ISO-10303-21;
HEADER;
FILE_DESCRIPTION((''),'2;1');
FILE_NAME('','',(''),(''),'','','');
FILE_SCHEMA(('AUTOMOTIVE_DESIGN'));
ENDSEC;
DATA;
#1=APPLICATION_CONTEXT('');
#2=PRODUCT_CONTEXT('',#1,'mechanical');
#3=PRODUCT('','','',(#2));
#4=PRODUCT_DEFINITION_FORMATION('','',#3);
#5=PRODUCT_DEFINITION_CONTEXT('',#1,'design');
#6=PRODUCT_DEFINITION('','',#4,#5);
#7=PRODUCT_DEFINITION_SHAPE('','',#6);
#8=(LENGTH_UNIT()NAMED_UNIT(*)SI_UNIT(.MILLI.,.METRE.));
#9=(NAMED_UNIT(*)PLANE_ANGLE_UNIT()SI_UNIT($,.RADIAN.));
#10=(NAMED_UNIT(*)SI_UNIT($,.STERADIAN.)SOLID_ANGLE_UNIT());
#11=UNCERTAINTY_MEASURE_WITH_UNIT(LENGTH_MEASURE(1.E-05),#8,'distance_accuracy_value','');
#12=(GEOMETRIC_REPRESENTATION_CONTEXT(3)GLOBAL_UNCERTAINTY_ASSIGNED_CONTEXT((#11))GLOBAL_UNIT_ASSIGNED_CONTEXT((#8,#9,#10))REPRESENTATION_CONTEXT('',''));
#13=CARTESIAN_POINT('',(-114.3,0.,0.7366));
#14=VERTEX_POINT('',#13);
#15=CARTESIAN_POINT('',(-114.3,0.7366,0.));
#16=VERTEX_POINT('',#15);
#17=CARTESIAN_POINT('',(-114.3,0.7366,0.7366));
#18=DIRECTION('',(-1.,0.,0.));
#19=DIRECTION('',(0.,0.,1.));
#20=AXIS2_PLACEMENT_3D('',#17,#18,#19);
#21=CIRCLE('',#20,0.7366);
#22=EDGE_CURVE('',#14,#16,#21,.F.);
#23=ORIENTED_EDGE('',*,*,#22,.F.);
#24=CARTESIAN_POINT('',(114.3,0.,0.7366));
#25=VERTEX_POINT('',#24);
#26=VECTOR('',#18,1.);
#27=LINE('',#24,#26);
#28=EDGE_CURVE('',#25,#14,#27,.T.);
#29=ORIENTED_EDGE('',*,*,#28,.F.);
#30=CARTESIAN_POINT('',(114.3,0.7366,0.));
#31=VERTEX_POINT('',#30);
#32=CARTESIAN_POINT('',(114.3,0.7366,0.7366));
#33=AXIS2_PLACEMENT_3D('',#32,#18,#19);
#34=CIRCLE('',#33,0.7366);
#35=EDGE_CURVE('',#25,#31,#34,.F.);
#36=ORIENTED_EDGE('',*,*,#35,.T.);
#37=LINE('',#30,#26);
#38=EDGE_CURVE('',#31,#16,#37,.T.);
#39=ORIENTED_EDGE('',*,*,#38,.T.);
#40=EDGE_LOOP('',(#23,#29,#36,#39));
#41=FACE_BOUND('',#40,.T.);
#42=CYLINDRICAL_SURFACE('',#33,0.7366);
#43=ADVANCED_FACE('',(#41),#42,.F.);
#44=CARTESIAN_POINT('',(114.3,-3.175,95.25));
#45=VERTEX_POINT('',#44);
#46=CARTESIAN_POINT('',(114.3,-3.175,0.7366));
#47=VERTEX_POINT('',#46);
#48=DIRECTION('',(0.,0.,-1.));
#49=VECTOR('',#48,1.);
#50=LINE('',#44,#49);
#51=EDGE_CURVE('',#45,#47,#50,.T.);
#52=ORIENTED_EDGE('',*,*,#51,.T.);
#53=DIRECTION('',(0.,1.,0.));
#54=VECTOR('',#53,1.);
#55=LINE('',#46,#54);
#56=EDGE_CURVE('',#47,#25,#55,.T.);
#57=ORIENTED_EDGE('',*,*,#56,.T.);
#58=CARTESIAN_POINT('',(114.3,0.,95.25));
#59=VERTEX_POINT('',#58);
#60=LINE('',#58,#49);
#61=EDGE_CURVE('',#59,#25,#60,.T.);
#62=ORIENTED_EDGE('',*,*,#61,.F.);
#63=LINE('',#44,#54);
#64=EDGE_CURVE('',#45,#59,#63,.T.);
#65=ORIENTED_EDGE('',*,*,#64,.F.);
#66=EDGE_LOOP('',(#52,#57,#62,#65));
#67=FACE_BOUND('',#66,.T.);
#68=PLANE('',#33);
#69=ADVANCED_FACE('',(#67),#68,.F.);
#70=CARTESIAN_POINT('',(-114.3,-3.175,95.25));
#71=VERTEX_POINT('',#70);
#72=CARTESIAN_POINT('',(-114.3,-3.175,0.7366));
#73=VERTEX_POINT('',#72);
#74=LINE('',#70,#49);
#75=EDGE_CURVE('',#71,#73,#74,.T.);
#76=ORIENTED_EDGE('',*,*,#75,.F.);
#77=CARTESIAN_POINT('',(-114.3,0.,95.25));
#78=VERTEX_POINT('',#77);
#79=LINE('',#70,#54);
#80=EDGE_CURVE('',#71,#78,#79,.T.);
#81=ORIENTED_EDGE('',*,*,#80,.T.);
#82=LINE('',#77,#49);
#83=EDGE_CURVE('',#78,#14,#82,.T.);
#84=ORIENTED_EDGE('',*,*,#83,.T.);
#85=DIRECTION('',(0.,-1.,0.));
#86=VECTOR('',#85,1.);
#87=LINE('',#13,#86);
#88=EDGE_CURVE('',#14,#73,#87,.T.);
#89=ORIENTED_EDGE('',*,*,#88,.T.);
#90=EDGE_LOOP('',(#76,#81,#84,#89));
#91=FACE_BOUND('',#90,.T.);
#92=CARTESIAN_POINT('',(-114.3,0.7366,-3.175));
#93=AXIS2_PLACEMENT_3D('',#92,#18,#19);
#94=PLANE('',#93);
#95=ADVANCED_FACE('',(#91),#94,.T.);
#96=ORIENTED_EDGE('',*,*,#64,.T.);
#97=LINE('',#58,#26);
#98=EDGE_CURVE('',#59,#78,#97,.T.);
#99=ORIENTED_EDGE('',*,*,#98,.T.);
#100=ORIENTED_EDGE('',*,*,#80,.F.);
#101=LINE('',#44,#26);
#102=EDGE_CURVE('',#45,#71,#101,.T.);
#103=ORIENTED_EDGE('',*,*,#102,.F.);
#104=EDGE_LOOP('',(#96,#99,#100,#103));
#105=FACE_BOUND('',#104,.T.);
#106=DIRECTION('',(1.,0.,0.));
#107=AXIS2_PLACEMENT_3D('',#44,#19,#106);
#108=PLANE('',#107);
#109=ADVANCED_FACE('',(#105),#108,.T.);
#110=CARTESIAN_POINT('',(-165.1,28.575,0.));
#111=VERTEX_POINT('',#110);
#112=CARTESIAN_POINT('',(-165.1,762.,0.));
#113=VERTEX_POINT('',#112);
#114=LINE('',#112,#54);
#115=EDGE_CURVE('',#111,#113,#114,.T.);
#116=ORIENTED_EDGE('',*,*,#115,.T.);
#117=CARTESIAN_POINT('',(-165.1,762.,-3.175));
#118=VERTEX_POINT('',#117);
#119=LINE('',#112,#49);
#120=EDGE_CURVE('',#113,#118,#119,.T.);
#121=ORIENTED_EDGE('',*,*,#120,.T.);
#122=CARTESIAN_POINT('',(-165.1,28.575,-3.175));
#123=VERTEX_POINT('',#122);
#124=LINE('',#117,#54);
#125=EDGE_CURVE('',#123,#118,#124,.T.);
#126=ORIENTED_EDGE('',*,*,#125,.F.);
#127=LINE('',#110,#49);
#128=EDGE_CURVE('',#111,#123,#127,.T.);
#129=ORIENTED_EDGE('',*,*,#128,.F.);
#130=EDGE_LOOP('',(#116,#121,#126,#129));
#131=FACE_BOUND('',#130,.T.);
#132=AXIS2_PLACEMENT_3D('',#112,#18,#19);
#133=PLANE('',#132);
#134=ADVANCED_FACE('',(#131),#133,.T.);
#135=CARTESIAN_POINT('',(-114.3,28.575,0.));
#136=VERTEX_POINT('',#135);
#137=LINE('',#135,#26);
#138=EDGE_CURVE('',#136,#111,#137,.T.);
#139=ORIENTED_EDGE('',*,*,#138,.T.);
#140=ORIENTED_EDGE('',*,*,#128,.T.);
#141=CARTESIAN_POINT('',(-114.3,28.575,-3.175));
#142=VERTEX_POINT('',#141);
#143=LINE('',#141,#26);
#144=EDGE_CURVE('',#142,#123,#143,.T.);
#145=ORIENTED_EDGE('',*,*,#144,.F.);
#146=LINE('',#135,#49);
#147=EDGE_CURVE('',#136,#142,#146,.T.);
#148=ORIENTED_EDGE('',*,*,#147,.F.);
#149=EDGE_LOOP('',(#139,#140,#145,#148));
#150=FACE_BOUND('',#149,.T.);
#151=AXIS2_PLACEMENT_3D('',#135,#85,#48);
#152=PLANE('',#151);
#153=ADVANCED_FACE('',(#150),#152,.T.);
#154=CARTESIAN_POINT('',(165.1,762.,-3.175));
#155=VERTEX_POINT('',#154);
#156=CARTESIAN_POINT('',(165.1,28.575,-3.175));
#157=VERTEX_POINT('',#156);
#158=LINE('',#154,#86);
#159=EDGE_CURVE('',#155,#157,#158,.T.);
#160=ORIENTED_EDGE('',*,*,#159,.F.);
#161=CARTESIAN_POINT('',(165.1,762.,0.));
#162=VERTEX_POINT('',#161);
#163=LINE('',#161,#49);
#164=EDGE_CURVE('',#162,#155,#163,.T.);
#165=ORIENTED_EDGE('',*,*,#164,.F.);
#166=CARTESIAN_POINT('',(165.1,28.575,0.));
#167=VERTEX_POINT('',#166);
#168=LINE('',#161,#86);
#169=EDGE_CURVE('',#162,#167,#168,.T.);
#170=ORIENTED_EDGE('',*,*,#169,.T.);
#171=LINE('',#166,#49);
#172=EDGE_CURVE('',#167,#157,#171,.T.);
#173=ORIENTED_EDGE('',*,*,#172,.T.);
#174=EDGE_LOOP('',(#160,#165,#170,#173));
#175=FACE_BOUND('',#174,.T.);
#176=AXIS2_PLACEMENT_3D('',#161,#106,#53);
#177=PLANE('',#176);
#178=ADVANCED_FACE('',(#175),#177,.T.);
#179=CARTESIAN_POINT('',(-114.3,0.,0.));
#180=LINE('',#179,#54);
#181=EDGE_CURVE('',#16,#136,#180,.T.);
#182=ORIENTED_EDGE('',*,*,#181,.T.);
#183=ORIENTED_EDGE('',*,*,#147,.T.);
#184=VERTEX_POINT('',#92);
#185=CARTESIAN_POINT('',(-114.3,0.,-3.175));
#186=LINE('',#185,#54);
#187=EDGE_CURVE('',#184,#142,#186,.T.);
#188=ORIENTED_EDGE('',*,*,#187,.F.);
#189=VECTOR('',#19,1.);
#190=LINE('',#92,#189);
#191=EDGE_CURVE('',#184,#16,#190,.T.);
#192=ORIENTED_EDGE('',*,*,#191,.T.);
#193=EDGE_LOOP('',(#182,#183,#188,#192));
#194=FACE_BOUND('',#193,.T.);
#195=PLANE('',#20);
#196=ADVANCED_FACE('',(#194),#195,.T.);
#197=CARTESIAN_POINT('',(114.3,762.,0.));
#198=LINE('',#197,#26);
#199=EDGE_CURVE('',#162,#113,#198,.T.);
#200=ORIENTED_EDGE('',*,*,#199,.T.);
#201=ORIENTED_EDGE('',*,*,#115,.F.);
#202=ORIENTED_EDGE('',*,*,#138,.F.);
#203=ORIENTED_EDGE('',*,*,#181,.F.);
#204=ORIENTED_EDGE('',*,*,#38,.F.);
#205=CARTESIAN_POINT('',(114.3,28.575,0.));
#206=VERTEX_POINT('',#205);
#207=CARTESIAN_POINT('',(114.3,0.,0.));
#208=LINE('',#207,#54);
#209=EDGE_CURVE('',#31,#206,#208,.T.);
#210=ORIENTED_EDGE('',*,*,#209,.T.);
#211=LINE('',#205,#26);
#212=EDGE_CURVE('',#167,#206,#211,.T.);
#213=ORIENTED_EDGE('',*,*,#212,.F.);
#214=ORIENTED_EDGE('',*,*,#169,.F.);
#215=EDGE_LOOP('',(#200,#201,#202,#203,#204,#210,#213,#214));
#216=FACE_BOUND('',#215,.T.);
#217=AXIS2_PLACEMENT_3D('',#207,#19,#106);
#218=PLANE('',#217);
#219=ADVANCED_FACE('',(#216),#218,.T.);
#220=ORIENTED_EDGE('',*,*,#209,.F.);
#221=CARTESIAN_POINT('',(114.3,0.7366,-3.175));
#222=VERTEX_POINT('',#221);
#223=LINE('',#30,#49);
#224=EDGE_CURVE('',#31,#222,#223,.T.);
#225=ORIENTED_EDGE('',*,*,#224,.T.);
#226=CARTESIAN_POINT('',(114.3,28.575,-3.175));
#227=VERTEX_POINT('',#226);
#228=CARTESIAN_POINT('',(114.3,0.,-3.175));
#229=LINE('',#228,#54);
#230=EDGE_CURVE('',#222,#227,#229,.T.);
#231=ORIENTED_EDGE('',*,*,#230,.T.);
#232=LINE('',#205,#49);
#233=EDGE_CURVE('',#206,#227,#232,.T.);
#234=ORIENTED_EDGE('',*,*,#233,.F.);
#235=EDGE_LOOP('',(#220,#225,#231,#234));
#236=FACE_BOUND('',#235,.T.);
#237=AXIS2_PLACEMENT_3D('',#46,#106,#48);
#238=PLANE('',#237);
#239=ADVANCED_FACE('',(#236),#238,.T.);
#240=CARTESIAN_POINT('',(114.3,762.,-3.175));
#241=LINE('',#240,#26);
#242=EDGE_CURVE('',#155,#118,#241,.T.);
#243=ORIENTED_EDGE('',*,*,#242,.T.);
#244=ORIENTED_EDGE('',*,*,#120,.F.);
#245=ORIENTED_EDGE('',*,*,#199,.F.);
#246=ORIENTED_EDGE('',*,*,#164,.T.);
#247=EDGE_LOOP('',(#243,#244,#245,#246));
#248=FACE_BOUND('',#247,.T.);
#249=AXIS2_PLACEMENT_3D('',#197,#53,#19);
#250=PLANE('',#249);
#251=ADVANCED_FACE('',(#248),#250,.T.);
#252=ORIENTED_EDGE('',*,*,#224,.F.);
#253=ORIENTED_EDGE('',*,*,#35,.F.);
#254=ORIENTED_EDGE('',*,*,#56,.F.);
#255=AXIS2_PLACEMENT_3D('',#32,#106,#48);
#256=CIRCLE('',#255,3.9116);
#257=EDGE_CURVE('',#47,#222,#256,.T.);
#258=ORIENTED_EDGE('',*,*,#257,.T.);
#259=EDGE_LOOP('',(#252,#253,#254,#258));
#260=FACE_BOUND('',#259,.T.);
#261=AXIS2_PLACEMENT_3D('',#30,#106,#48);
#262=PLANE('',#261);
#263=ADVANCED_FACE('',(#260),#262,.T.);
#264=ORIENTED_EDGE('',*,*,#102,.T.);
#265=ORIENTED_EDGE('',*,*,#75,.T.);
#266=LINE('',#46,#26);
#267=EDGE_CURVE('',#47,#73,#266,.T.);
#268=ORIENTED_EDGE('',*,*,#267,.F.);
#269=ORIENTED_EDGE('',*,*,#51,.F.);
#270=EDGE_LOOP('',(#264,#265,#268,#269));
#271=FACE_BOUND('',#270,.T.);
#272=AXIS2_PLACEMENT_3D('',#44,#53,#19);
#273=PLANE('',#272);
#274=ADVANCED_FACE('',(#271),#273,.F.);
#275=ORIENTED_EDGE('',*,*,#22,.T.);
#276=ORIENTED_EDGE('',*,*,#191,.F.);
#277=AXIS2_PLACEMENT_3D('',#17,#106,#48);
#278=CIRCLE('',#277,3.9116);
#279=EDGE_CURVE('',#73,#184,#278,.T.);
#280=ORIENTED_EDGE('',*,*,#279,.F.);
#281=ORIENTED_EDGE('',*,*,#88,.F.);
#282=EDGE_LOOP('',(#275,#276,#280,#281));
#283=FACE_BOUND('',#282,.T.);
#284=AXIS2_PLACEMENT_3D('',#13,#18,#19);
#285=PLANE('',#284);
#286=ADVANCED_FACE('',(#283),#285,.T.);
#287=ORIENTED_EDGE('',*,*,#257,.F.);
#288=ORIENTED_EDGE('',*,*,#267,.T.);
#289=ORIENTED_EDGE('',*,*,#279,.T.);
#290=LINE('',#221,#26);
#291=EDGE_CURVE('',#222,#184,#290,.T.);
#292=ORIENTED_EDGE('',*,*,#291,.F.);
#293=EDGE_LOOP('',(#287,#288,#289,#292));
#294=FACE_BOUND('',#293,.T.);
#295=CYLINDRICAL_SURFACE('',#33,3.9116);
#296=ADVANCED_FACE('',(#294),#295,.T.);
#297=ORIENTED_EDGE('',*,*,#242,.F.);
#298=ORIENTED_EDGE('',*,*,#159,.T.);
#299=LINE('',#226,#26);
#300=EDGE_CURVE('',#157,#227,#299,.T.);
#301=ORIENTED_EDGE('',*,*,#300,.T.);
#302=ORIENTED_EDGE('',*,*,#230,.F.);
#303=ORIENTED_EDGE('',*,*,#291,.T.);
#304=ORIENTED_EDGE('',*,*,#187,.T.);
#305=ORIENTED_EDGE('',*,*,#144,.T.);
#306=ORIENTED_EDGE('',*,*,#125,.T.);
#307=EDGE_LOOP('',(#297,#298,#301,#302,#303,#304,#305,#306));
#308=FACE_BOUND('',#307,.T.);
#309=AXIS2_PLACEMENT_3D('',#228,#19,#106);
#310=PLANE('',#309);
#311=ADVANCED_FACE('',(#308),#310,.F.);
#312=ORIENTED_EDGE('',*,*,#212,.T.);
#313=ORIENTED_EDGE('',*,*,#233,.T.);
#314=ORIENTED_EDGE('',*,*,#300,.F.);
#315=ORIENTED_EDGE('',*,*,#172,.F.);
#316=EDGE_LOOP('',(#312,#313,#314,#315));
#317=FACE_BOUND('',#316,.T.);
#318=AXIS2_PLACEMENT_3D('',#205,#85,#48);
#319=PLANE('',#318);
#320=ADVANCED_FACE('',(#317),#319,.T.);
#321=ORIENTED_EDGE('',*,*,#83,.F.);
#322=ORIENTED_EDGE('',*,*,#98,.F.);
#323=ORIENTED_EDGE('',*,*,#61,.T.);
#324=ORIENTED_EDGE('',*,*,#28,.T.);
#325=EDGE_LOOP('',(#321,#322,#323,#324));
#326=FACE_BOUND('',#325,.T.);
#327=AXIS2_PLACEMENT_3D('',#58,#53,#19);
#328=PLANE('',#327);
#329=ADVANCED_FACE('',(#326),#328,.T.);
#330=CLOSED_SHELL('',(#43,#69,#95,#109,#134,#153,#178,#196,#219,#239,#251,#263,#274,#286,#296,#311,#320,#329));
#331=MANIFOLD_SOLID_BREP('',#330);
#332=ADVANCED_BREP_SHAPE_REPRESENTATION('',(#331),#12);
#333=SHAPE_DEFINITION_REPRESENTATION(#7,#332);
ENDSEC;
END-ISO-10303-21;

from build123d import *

# Parameters (mm, degrees)
BASE_FLANGE1_DEPTH = 114.3
SKETCH6_W          = 50.8
SKETCH6_H          = 733.425
TAB1_DEPTH         = 3.175


# Sheet-metal steps are written as plain solids
with BuildPart() as part:
    # Sketch1 → Base-Flange1 (new, symmetric)
    with BuildSketch(Plane(origin=(0, 0, 0), x_dir=(0, 0, -1), z_dir=(1, 0, 0))):
        with BuildLine():
            Line((-95.25, 0), (-0.7366, 0))
            ThreePointArc((-0.7366, 0), (-0.215745145, 0.215745145), (0, 0.7366))
            Line((0, 0.7366), (0, 762))
            Line((0, 762), (3.175, 762))
            Line((3.175, 762), (3.175, 0.7366))
            ThreePointArc((3.175, 0.7366), (2.029318885, -2.029318885), (-0.7366, -3.175))
            Line((-0.7366, -3.175), (-95.25, -3.175))
            Line((-95.25, -3.175), (-95.25, 0))
        make_face()
    extrude(amount=BASE_FLANGE1_DEPTH, both=True)

    # Sketch6 → Tab1 (add)
    with BuildSketch(Plane(origin=(0, 0, -3.175), x_dir=(-1, 0, 0), z_dir=(0, 0, -1))):
        with Locations((-139.7, 395.2875)):
            Rectangle(SKETCH6_W, SKETCH6_H)
        with Locations((139.7, 395.2875)):
            Rectangle(SKETCH6_W, SKETCH6_H)
    extrude(amount=-TAB1_DEPTH)


solid = part.part
